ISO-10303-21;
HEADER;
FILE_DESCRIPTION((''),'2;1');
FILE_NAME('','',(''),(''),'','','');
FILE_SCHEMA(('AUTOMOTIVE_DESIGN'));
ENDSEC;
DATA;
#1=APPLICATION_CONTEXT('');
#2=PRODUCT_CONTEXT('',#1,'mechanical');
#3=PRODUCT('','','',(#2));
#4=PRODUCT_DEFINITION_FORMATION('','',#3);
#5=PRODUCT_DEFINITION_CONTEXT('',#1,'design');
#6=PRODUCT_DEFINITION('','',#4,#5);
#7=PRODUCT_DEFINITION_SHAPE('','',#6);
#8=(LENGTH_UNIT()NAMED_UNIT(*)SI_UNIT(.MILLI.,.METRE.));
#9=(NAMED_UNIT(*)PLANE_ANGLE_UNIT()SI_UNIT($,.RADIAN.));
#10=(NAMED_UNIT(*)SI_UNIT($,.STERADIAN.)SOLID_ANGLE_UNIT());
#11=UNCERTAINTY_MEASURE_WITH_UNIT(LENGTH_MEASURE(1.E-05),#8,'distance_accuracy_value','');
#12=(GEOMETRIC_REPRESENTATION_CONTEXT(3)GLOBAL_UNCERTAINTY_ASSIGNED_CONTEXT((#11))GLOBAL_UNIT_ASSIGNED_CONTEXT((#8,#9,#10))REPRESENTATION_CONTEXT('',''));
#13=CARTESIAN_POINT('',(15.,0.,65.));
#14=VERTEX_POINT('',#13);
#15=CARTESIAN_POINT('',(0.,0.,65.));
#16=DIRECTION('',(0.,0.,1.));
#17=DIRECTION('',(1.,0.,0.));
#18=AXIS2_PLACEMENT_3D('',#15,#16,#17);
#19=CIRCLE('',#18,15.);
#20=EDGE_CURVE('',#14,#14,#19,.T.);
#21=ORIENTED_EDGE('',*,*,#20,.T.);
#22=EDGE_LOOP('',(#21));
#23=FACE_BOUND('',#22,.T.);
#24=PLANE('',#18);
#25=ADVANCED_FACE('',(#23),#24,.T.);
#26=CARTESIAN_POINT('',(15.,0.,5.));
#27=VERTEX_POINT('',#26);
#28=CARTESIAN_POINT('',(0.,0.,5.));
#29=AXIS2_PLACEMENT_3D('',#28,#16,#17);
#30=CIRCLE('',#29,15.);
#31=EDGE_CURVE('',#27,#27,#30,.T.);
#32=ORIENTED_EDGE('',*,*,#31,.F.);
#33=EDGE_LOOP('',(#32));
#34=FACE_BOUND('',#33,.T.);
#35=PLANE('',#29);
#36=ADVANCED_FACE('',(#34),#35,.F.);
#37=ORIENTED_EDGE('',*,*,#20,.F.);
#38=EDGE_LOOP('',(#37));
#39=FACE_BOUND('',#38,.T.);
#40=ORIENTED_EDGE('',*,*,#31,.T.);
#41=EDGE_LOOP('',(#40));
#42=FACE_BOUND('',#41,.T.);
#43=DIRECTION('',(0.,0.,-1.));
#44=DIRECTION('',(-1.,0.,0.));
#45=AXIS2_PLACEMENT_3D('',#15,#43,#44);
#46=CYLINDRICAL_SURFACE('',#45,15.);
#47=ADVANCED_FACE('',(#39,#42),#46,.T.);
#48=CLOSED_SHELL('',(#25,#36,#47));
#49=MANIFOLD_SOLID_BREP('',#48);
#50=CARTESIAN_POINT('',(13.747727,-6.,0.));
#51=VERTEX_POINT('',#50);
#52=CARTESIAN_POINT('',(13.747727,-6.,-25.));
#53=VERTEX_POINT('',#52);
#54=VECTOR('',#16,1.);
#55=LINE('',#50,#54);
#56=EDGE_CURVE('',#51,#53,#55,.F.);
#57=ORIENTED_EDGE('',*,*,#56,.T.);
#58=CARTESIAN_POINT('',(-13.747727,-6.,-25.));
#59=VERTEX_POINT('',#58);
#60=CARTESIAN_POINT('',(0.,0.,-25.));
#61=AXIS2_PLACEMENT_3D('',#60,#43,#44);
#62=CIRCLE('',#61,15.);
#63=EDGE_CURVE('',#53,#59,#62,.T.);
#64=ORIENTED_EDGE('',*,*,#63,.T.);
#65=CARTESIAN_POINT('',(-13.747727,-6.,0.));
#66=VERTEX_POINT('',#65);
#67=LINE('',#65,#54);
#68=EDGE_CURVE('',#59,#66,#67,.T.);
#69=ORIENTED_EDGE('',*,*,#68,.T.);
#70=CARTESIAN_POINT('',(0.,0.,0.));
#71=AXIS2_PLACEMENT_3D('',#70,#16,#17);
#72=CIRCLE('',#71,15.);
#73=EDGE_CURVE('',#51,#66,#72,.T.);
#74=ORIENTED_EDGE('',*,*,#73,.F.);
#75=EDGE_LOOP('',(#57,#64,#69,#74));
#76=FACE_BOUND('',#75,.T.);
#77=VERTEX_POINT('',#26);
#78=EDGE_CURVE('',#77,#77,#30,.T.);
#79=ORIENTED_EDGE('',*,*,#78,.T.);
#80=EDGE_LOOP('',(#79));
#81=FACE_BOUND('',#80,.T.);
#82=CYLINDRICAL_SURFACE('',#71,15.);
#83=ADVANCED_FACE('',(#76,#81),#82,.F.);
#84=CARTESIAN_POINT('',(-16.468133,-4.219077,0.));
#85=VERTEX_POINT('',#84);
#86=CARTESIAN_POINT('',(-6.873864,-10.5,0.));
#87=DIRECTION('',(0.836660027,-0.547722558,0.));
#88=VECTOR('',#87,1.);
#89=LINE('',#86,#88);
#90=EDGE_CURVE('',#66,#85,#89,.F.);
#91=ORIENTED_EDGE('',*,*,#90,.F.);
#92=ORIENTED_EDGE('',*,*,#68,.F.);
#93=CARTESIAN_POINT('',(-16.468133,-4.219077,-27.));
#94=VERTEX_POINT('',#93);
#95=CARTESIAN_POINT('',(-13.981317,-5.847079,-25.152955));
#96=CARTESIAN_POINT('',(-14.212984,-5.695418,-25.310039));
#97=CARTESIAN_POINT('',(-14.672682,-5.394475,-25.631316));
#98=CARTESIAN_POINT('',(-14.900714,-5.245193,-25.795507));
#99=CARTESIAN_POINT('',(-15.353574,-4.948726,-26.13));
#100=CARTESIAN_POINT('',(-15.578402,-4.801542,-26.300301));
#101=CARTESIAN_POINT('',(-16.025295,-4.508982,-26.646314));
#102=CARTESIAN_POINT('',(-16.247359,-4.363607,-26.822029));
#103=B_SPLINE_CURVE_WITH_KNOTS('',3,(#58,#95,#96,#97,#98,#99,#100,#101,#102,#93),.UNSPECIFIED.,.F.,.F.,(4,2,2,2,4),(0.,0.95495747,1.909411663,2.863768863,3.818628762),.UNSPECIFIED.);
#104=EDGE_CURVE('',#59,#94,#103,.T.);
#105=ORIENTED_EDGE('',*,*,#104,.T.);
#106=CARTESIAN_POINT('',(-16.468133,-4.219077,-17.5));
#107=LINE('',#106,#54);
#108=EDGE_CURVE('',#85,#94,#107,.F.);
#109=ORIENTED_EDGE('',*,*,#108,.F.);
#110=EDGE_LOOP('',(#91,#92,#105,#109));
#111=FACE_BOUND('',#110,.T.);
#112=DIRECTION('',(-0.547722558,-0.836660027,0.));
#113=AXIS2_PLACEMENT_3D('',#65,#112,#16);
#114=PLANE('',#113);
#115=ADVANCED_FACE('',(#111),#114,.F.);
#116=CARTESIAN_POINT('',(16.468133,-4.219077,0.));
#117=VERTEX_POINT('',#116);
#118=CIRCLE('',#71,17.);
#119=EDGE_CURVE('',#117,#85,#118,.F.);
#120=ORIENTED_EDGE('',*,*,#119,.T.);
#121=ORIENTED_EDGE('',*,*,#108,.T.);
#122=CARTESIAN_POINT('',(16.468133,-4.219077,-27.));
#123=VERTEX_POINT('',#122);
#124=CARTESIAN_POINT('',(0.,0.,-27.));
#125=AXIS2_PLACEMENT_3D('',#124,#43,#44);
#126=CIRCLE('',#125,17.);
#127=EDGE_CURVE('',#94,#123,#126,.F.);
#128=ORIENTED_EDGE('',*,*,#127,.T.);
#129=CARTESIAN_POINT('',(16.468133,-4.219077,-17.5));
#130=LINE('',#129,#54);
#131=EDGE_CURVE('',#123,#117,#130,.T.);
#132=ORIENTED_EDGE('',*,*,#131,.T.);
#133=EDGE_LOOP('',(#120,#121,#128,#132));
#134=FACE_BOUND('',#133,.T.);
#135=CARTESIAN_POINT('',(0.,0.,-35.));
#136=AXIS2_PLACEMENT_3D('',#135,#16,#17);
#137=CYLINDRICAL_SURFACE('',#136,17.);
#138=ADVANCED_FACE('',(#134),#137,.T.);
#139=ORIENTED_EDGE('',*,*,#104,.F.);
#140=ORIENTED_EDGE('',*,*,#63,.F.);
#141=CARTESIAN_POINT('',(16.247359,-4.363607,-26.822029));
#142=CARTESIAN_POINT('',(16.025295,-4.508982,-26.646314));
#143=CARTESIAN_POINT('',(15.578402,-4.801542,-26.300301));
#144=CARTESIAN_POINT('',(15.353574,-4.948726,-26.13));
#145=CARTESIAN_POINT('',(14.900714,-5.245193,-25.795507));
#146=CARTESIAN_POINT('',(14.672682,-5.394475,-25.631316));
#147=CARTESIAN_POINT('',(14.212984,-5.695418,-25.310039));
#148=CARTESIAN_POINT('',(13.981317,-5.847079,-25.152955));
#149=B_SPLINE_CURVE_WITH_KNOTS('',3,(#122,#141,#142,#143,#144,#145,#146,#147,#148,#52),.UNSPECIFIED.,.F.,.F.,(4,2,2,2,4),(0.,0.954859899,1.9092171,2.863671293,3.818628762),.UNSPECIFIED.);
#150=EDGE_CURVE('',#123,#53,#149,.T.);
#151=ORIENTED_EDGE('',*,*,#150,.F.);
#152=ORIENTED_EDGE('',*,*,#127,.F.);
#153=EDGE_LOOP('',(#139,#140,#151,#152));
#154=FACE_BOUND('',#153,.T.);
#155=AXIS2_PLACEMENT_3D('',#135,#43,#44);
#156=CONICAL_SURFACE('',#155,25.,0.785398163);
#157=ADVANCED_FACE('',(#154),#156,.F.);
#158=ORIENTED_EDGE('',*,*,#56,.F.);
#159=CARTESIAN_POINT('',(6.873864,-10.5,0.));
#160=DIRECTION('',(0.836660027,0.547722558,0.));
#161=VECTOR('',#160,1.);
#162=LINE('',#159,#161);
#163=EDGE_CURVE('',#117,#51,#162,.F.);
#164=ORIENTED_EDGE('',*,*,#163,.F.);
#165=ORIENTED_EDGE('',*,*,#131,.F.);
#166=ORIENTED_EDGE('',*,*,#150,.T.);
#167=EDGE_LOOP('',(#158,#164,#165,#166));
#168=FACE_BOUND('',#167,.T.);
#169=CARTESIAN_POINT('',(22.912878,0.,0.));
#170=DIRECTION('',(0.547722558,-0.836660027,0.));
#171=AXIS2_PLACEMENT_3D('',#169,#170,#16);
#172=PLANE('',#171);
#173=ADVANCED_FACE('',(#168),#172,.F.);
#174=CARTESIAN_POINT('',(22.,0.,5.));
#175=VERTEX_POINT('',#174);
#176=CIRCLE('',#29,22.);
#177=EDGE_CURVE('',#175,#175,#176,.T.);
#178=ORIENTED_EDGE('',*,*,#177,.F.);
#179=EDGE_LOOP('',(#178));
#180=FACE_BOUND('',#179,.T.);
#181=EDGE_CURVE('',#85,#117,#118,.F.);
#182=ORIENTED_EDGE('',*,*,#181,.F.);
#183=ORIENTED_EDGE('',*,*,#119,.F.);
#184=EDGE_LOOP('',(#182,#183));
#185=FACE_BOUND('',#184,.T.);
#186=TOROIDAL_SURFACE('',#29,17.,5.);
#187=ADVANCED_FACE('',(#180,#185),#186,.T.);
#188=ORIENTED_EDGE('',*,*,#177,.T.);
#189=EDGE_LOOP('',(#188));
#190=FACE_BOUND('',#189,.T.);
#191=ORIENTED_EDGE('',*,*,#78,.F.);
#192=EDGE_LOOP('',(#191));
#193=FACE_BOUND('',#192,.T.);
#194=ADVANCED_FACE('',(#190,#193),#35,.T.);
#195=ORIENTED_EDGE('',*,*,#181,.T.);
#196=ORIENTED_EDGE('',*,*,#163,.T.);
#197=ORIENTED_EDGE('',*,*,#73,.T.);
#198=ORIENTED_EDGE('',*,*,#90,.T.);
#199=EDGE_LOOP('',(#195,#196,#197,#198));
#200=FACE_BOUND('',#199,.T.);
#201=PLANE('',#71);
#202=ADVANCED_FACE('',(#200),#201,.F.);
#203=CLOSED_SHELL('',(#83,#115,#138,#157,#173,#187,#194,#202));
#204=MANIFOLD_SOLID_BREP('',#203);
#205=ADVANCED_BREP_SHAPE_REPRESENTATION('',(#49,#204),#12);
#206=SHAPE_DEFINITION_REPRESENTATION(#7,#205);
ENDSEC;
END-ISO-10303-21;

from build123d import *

# Parameters (mm, degrees)
ESQUISSE1_R             = 22
BOSS_EXTRU_1_DEPTH      = 5
ESQUISSE2_R             = 15
ENL_V_MAT_EXTRU_1_DEPTH = 5
ESQUISSE5_R             = 15
BOSS_EXTRU_3_DEPTH      = 60
BOSS_EXTRU_4_DEPTH      = 40
CONG_3_R                = 5
CHANFREIN3_SIZE         = 10


# Some blends are built 0.0001 mm under size
with BuildPart() as part:
    # Esquisse1 → Boss.-Extru.1 (new body)
    with BuildSketch(Plane.XY):
        Circle(ESQUISSE1_R)
    extrude(amount=BOSS_EXTRU_1_DEPTH)

    # Esquisse2 → Enlèv. mat.-Extru.1 (cut)
    with BuildSketch(Plane.XY.offset(5)):
        Circle(ESQUISSE2_R)
    extrude(amount=-ENL_V_MAT_EXTRU_1_DEPTH, mode=Mode.SUBTRACT)

    # Esquisse6 → Boss.-Extru.4 (add)
    with BuildSketch(Plane(origin=(0, 0, 5), x_dir=(-1, 0, 0), z_dir=(0, 0, -1))):
        with BuildLine():
            Line((17, 0), (15, 0))
            ThreePointArc((15, 0), (0, -15), (-15, 0))
            Line((-15, 0), (-17, 0))
            ThreePointArc((-17, 0), (0, -17), (17, 0))
        make_face()
    extrude(amount=BOSS_EXTRU_4_DEPTH)

    # Congé3
    cong_3_edges = [part.edges().sort_by_distance(p)[0] for p in [
        (-22, 0, 0),
    ]]
    fillet(cong_3_edges, radius=CONG_3_R - 0.0001)  # a hair under: the kernel refuses the full size

    # Chanfrein1
    # the kernel refuses this chamfer: 10 mm, written as the material it takes off along each edge
    with BuildSketch(Plane(origin=(-15, 0, 0), x_dir=(-0.9996473593715249, 0.026554790557210644, 0), z_dir=(0, 0, -1))) as chanfrein1_piece_1:
        with BuildLine():
            Line((7.910088072, -0.210124831), (-1.411160056, -5.964630311))
            ThreePointArc((-1.411160056, -5.964630311), (-0.431948163, -3.196946743), (0, 0))
            Line((0, 0), (7.910088072, -0.210124831))
        make_face()
    extrude(amount=55.626129825, mode=Mode.SUBTRACT)

    # Chanfrein2
    # the kernel refuses this chamfer: 10 mm, written as the material it takes off along each edge
    with BuildSketch(Plane(origin=(15, 0, 0), x_dir=(-0.24724932130112434, -0.9689518941186571, 0), z_dir=(0, 0, -1))) as chanfrein2_piece_1:
        with BuildLine():
            Line((6.123334993, -0.270103715), (-1.956453832, -7.667198586))
            Line((-1.956453832, -7.667198586), (0, 0))
            ThreePointArc((0, 0), (3.193480576, -0.45686924), (6.123334993, -0.270103715))
        make_face()
    extrude(amount=55.626129825, mode=Mode.SUBTRACT)

    # Chanfrein3
    # the kernel refuses this chamfer: 10 mm, written as the material it takes off along each edge
    with BuildSketch(Plane(origin=(0, 0, -35), x_dir=(-0.2632185213229825, 0.9647362385815837, 0), z_dir=(0.9647362385815837, 0.2632185213229825, 0))) as chanfrein3_piece_1:
        Polygon((15, CHANFREIN3_SIZE), (15 + CHANFREIN3_SIZE, 0), (15, 0), align=None)
    revolve(axis=Axis((0, 0, -35), (0, 0, 1)), revolution_arc=329.477752243, mode=Mode.SUBTRACT)


with BuildPart() as body_2:
    # Esquisse5 → Boss.-Extru.3 (new body)
    with BuildSketch(Plane.XY.offset(5)):
        Circle(ESQUISSE5_R)
    extrude(amount=BOSS_EXTRU_3_DEPTH)


solid = Compound([part.part, body_2.part])
